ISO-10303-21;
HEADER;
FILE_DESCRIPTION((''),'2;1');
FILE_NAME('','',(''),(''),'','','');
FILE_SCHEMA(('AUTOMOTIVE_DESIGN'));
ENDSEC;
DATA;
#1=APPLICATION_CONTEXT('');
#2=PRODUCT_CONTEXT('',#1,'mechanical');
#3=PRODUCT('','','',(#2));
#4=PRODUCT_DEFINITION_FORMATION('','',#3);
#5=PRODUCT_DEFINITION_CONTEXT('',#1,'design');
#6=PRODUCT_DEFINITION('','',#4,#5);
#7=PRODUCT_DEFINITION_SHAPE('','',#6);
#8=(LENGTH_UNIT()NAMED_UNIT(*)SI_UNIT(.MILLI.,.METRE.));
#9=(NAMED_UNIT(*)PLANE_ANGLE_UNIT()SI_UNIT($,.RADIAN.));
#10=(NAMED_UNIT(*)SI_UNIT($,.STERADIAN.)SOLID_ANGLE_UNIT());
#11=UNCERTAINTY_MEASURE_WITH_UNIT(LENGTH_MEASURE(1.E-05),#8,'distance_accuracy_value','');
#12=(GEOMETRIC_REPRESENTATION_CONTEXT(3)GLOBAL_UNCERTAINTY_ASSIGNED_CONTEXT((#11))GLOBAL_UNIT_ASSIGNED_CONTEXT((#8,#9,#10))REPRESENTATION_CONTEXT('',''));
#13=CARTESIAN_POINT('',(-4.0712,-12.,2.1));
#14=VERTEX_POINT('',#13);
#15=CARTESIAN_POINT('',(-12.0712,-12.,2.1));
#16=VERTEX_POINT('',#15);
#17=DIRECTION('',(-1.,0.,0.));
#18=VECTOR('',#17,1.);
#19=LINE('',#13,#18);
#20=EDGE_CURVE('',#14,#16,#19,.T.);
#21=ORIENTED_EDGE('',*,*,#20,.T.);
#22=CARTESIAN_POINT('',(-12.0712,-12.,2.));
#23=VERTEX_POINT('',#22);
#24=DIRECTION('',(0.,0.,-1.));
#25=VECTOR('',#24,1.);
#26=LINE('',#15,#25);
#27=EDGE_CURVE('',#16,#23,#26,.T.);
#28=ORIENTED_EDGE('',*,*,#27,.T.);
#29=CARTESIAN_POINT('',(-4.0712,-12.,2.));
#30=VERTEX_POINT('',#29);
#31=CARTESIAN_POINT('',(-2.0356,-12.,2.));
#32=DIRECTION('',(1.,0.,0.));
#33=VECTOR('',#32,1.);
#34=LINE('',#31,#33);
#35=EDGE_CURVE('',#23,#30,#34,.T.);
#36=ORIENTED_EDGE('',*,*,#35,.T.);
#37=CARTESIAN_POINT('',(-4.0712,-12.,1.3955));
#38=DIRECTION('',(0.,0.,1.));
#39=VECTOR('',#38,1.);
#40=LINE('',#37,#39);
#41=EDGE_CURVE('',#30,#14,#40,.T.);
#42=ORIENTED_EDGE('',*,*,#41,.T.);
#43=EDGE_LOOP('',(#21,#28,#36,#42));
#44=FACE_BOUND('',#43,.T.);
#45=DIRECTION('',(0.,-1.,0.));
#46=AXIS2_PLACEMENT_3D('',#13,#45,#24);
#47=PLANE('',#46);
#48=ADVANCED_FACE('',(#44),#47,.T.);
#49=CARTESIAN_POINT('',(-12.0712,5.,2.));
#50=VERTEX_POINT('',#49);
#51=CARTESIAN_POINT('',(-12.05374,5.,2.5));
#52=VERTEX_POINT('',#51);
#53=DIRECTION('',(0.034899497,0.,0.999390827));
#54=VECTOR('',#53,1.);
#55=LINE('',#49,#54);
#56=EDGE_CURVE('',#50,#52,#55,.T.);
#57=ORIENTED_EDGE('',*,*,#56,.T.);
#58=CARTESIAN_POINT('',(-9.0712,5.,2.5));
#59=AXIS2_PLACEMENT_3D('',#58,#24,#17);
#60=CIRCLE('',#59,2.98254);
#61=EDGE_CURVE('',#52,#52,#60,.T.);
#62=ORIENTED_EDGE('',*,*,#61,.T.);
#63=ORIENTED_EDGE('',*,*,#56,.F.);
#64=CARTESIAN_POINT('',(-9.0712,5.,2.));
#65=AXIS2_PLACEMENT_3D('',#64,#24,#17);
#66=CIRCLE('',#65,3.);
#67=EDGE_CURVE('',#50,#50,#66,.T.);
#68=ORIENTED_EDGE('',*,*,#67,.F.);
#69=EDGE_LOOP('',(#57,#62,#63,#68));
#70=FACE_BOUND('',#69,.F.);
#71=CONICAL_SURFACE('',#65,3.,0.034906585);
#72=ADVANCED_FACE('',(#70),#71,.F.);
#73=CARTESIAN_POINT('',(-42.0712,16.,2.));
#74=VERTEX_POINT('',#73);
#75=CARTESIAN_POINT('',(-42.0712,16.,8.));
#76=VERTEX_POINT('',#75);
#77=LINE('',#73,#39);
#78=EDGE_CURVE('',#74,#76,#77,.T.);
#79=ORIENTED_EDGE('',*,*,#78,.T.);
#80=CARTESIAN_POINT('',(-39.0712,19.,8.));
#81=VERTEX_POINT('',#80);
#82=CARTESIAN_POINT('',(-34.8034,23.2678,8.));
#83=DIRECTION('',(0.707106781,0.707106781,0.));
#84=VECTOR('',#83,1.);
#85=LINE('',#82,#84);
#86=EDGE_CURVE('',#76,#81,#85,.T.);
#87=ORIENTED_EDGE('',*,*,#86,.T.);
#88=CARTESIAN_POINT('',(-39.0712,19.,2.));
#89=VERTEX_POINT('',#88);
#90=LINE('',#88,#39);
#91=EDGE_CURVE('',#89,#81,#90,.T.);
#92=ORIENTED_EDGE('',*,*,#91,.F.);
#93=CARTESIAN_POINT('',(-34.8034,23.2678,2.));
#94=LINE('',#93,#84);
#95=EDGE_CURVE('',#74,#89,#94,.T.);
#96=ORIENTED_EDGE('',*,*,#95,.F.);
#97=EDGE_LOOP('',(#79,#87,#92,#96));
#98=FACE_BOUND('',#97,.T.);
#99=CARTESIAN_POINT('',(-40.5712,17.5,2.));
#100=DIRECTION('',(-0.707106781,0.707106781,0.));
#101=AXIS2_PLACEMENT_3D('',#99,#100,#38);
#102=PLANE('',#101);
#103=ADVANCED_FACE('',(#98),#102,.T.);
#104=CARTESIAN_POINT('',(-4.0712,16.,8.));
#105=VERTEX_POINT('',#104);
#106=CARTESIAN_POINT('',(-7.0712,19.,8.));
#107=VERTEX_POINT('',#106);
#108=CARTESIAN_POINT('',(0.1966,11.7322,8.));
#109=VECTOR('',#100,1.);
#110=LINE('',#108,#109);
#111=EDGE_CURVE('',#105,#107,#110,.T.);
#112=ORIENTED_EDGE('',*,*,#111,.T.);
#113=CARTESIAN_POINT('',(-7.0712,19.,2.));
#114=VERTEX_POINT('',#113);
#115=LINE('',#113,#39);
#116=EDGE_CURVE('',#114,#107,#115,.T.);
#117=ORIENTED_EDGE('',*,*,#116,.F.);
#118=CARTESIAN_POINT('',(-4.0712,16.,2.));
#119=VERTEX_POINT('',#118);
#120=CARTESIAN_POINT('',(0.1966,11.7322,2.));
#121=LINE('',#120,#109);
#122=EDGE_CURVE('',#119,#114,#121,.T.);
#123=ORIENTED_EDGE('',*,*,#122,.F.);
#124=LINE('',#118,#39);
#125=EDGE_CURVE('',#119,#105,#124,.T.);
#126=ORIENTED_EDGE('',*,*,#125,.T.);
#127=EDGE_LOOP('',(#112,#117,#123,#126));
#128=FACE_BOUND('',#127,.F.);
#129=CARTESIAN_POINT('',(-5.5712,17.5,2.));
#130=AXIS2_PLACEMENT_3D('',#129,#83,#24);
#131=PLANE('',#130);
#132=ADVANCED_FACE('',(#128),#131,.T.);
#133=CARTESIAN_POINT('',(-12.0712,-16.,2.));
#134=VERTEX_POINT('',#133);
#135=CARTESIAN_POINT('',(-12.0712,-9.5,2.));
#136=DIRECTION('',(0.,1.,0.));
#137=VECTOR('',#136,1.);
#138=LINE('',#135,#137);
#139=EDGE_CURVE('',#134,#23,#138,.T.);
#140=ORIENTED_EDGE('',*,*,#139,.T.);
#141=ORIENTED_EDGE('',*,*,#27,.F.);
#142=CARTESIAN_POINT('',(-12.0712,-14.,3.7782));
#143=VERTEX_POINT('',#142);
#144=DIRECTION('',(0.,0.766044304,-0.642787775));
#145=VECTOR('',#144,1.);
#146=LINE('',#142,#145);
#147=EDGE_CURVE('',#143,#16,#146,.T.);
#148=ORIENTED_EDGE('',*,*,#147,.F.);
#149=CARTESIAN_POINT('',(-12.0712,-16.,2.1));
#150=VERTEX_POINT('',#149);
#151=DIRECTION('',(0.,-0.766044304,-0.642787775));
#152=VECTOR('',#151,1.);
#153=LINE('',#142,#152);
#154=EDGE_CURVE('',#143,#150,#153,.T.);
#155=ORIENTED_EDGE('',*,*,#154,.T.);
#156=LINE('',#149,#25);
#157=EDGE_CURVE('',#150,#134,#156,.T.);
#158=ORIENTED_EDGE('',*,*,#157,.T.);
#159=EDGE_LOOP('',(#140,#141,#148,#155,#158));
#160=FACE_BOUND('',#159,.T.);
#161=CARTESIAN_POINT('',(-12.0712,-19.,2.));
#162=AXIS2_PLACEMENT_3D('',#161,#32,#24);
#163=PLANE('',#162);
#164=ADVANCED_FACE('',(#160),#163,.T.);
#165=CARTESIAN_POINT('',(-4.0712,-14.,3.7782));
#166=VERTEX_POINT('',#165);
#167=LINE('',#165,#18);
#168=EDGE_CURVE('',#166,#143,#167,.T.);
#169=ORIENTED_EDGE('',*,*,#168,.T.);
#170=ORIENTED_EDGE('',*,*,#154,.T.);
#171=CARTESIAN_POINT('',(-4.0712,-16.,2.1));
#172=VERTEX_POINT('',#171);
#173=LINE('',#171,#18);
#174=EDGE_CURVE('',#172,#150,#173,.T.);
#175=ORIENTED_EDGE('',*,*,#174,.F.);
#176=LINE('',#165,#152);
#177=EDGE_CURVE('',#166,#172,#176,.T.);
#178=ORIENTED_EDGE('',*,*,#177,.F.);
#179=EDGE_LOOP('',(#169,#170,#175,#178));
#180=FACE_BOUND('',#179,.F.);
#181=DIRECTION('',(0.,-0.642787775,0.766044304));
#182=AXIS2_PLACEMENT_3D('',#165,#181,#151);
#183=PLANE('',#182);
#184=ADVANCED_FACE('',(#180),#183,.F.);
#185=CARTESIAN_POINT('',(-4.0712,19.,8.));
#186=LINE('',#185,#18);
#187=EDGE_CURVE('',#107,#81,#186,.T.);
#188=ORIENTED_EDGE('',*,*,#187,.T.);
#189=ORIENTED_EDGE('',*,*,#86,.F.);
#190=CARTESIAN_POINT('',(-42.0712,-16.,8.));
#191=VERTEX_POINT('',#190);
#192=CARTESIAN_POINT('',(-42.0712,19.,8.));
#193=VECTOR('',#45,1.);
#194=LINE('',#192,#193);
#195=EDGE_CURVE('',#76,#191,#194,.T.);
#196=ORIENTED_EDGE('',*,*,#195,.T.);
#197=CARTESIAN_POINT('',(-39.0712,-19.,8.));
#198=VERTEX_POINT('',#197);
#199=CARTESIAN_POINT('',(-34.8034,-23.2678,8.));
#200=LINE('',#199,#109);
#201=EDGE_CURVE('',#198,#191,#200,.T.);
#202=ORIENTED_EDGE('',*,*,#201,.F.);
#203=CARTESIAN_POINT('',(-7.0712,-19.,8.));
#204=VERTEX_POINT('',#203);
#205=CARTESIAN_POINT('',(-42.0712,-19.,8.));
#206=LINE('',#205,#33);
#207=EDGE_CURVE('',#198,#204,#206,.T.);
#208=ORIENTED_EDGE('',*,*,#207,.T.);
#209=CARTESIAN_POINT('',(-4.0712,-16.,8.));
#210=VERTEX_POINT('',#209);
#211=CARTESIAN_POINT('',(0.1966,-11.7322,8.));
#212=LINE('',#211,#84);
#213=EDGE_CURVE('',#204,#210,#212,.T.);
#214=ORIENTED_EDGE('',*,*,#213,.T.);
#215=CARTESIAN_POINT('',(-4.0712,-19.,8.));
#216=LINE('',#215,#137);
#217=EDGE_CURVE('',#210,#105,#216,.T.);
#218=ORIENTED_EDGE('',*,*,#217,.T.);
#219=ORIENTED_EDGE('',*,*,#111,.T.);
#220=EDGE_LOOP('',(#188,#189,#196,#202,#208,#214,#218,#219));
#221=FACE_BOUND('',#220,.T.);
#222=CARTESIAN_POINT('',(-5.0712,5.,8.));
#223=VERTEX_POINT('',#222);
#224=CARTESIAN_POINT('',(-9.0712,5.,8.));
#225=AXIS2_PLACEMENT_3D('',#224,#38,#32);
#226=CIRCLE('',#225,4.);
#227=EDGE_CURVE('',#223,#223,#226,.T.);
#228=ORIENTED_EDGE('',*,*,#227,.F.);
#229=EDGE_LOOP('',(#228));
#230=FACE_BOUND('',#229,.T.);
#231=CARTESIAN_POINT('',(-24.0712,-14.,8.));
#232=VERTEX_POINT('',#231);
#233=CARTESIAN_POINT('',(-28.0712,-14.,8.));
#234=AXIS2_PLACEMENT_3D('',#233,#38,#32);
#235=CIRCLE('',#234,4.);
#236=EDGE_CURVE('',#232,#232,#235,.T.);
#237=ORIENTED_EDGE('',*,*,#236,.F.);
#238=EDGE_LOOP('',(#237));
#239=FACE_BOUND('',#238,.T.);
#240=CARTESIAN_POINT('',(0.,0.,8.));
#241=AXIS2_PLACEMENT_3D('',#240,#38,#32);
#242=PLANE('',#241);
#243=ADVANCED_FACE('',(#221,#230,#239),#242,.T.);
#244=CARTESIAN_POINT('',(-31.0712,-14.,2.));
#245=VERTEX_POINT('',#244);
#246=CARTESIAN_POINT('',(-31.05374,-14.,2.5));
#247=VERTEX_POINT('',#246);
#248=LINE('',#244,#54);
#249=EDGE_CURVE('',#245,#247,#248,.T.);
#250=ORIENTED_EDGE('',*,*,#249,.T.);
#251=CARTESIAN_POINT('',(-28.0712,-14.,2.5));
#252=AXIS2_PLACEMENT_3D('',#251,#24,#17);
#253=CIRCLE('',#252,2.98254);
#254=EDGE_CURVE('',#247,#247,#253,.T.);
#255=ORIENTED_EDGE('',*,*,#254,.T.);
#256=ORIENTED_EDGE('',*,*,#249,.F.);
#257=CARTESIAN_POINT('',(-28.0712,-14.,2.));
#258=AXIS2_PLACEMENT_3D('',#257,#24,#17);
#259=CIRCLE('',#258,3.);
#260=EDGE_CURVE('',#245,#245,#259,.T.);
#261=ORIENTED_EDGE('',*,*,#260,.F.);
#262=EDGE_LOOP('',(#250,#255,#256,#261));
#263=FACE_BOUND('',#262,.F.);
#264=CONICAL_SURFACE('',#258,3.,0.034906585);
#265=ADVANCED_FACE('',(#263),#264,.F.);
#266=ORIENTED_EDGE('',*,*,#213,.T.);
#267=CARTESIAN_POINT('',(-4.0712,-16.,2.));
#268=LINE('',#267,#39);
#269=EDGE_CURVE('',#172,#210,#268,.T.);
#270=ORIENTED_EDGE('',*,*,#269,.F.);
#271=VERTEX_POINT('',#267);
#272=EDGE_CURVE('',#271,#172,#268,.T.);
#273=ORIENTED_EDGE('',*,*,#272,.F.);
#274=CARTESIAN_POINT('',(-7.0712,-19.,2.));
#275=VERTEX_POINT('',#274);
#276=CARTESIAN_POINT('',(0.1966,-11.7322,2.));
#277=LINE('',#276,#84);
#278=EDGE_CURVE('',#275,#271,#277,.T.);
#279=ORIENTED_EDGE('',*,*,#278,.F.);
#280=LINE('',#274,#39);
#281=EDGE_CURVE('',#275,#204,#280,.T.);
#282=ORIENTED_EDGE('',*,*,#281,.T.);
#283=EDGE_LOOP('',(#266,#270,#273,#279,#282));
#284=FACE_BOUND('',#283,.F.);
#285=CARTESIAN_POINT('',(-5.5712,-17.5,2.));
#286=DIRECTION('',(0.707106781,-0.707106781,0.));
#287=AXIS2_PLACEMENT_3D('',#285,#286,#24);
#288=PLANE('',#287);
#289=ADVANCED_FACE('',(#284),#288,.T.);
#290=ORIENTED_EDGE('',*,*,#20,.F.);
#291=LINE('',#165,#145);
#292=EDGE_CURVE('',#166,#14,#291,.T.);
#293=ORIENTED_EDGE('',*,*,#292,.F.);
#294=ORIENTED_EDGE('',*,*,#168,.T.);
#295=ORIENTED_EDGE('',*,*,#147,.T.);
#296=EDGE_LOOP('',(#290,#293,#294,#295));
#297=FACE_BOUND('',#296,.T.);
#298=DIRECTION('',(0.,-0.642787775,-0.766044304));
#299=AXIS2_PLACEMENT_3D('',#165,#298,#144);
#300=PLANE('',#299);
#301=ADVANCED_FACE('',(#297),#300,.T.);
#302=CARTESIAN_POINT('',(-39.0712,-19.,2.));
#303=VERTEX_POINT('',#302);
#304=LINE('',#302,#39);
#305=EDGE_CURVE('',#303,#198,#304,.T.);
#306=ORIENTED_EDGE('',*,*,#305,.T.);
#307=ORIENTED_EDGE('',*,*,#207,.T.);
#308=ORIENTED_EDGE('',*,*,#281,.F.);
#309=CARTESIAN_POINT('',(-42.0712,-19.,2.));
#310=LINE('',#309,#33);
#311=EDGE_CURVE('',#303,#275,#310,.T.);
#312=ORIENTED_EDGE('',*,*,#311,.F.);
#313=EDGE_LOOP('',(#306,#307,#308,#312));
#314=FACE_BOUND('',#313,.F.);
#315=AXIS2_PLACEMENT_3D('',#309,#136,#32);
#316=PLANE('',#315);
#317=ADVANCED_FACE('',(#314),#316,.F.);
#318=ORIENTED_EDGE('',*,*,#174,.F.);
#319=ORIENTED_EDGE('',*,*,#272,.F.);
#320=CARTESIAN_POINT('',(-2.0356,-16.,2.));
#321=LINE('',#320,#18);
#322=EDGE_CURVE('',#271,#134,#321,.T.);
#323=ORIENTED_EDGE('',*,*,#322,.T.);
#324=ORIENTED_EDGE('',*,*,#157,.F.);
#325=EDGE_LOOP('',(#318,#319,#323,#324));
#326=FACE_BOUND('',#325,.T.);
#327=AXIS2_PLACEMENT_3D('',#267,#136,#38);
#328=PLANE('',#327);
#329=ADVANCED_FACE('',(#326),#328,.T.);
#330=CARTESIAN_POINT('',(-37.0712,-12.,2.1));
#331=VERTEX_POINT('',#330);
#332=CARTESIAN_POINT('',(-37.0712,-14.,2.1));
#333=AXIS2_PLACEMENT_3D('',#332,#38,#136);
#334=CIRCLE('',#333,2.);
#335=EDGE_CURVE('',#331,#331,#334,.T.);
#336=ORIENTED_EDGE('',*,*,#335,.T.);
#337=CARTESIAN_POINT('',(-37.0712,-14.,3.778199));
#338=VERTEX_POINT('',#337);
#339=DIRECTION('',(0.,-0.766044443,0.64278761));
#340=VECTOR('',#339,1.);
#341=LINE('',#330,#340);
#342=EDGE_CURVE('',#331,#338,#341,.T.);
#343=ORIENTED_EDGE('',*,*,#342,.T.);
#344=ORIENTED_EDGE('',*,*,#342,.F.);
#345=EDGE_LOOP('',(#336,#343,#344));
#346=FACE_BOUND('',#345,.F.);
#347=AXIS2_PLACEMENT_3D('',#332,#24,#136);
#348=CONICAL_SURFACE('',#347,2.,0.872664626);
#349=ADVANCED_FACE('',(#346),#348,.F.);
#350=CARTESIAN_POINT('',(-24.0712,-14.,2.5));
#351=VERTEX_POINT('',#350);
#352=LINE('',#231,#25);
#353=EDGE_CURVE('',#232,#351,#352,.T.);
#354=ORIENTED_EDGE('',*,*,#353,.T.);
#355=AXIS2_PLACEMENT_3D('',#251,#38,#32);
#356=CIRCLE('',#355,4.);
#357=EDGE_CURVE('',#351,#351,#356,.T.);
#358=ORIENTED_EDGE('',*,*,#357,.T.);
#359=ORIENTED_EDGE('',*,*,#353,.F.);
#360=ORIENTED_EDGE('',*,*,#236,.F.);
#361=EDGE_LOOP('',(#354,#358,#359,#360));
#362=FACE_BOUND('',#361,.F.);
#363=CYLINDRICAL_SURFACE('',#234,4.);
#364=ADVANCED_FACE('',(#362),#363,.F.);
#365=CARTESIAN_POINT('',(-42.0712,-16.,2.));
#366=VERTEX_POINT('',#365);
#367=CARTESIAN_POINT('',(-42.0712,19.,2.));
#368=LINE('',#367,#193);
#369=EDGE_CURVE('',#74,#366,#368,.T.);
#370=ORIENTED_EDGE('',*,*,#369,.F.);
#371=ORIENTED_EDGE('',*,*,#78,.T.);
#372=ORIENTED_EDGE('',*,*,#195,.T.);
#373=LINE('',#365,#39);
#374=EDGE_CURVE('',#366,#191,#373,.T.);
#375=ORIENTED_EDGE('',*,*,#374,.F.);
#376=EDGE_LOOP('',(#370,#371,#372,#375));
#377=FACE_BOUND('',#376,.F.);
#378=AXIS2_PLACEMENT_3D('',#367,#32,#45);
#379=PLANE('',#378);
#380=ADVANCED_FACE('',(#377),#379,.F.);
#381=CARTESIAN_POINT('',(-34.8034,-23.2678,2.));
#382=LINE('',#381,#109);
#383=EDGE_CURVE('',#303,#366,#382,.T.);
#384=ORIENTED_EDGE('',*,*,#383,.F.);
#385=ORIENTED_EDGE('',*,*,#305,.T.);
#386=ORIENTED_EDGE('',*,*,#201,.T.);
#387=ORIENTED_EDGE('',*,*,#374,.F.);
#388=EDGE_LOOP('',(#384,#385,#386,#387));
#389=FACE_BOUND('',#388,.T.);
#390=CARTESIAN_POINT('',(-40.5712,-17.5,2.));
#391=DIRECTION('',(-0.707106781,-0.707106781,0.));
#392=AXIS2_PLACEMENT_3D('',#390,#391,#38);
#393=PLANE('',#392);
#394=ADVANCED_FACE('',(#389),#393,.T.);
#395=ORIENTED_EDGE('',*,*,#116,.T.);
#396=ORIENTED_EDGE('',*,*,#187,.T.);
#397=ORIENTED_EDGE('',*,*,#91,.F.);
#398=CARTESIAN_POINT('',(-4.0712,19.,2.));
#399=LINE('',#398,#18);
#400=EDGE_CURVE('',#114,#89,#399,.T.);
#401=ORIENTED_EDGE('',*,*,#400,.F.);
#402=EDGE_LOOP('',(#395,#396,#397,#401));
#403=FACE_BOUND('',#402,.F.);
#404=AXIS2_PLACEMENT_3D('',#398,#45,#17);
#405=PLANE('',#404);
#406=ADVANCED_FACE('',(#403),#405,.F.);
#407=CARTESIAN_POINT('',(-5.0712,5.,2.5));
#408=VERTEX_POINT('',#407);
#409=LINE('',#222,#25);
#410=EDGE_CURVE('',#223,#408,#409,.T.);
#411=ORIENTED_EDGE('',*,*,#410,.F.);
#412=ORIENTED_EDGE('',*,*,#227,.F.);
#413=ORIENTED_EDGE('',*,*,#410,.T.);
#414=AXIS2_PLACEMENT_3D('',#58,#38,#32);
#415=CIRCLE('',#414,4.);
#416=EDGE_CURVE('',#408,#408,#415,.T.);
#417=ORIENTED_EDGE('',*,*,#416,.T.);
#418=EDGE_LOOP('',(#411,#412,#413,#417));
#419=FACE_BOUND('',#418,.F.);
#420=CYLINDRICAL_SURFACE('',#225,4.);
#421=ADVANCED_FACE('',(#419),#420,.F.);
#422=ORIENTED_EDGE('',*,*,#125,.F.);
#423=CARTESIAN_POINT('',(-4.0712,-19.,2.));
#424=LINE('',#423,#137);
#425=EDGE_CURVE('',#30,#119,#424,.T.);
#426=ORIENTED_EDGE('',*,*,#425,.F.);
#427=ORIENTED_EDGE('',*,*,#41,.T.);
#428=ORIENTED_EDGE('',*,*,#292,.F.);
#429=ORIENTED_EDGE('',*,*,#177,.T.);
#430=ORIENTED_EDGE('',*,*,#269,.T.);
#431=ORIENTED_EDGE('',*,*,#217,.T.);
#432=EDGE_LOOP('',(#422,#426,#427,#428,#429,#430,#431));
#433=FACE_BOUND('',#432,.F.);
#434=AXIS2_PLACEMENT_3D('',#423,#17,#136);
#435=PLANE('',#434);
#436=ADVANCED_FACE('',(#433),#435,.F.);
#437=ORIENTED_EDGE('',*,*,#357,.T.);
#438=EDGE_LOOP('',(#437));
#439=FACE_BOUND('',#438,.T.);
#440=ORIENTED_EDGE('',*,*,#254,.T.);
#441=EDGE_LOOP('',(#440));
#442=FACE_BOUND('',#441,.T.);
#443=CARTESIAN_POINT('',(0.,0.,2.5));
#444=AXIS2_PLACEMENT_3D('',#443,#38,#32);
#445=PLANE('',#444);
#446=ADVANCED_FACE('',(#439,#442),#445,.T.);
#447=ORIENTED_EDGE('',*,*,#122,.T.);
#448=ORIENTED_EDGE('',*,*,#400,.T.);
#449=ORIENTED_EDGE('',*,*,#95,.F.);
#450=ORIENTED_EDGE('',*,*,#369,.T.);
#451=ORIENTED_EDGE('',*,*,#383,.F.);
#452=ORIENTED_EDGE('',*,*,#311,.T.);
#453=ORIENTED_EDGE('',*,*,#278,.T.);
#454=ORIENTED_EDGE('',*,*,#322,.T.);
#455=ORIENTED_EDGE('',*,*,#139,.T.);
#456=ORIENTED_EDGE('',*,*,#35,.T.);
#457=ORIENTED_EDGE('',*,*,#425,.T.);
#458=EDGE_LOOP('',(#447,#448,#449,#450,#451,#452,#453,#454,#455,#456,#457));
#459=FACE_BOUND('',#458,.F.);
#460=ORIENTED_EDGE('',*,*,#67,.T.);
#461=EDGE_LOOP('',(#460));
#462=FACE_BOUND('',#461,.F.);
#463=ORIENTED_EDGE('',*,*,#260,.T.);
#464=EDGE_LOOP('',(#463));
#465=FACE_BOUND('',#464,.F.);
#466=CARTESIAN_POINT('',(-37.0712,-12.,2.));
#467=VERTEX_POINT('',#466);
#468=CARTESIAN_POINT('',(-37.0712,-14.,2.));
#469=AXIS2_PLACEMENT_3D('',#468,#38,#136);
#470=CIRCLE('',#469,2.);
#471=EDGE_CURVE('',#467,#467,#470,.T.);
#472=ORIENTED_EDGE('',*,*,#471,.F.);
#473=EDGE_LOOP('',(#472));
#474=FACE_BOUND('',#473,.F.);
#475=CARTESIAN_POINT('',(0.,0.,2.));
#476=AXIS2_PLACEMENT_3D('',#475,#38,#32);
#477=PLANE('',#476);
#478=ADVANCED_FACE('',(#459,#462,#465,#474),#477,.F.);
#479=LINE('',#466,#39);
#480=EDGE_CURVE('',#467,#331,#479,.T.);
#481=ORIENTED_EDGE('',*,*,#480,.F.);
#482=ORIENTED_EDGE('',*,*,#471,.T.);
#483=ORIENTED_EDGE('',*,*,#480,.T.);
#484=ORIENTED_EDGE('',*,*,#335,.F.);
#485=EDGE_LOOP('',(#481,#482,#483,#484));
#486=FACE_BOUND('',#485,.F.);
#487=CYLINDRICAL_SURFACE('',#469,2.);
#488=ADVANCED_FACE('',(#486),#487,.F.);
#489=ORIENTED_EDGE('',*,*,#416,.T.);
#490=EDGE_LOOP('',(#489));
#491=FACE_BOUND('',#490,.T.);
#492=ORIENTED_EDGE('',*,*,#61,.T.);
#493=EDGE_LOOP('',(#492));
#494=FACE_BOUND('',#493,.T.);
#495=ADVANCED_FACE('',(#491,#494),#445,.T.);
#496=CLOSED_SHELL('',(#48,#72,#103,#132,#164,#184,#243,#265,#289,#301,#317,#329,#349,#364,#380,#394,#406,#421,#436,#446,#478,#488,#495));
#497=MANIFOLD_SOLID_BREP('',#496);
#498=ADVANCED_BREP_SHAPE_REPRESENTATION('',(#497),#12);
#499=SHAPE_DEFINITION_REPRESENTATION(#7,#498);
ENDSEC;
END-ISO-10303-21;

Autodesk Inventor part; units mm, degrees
ref_plane "YZ Plane" through (0, 0, 0) normal (1, 0, 0) x (0, 1, 0)
ref_plane "XZ Plane" through (0, 0, 0) normal (0, 1, 0) x (-1, 0, 0)
ref_plane "XY Plane" through (0, 0, 0) normal (0, 0, 1) x (1, 0, 0)
ref_plane "Work Plane1" through (0, 0, 2) normal (0, 0, 1) x (1, 0, 0)
sketch "Sketch1" plane through (0, 0, 2) normal (0, 0, 1) x (1, 0, 0)
  line L0 (-37.0712, 14) -> (-9.0712, 14) construction
  line L1 (-9.0712, 14) -> (-9.0712, -14) construction
  line L2 (-9.0712, -14) -> (-37.0712, -14) construction
  line L3 (-37.0712, -14) -> (-37.0712, 14) construction
  line L4 (-4.0712, -19) -> (-4.0712, 19)
  line L5 (-4.0712, 19) -> (-42.0712, 19)
  line L6 (-42.0712, 19) -> (-42.0712, -19)
  line L7 (-42.0712, -19) -> (-4.0712, -19)
  circle A0 centre (-23.0712, 0) radius 12.8
  point P0 (0, 0)
  dimension "d0" = 5
extrude "Extrusion1" add sketch "Sketch1" along normal blind 6 contours L7 L6 L5 L4 | A0
sketch "Sketch3" plane through (0, 0, 2) normal (0, 0, -1) x (-1, 0, 0)
  circle A0 centre (9.0712, -14) radius 1.45 construction
  circle A1 centre (9.0712, -14) radius 2.45
  circle A2 centre (37.0712, -14) radius 1.45 projected
  circle A3 centre (37.0712, -14) radius 1.95
  point P0 (0, 0)
  dimension "d8" = 1
  dimension "d10" = 0.5
chamfer "Chamfer1" distance 3 angle 45 4 edges at (-42.0712, 19, 5) (-4.0712, 19, 5) (-4.0712, -19, 5) (-42.0712, -19, 5)
hole "Hole1" at (-37.0712, -14, 2) direction (0, 0, 1) diameter 4 depth 0.1 tip angle 100
sketch "Sketch4" plane through (-4.0712, -19, 2) normal (1, 0, 0) x (0, 0, -1)
  line L0 (2, 4.45) -> (6, 4.45)
  line L1 (2, 1.55) -> (6, 1.55)
  line L2 (0, 0) -> (0, 38) projected
  arc A0 (2, 19) -> (2, 19) centre (1.5, 4.4206) ccw projected
  line L3 (-1.7782, 5) -> (-0.1, 7) projected
  line L4 (-1.7782, 5) -> (-0.1, 3) projected
  line L5 (-0.1, 7) -> (0.6045, 7)
  line L6 (0.6045, 7) -> (0.6045, 3)
  line L7 (0.6045, 3) -> (-0.1, 3)
  line L8 (-0.1, 3) -> (-0.1, 7)
extrude "Extrusion4" cut sketch "Sketch4" against normal blind 8 contours L7 L8 L5 L2 | L2 L5 L6 L7 | L4 L3 L8
ref_plane "Arbeitsebene2" through (-23.0712, -12, 2) normal (1, 0, 0) x (0, 0, -1)
ref_plane "Arbeitsebene3" through (-39.0712, 0, 2) normal (0, -1, 0) x (1, 0, 0)
sketch "Skizze9" plane through (0, 0, 2) normal (0, 0, -1) x (-1, 0, 0)
  line L0 (12.0712, -16) -> (4.0712, -16) projected
  line L1 (7.0712, -19) -> (4.0712, -16) projected
  line L2 (39.0712, -19) -> (7.0712, -19) projected
  line L3 (42.0712, -16) -> (39.0712, -19) projected
  line L4 (42.0712, 16) -> (42.0712, -16) projected
  line L5 (39.0712, 19) -> (42.0712, 16) projected
  line L6 (7.0712, 19) -> (39.0712, 19) projected
  line L7 (4.0712, 16) -> (7.0712, 19) projected
  line L8 (4.0712, -12) -> (4.0712, 16) projected
  line L9 (4.0712, -12) -> (12.0712, -12) projected
  line L10 (12.0712, -12) -> (12.0712, -16) projected
  circle A0 centre (37.0712, -14) radius 2 projected
  circle A1 centre (28.0712, -14) radius 3
  circle A2 centre (9.0712, 5) radius 3
  point P0 (0, 0)
  dimension "d54" = 6
  dimension "d55" = 6
  dimension "d56" = 14
  dimension "d57" = 5
  dimension "d58" = 5
  dimension "d59" = 14
extrude "Extrusion9" cut sketch "Skizze9" against normal blind 3 draft -2 contours A1 | A2
sketch "Skizze10" plane through (0, 0, 8) normal (0, 0, 1) x (1, 0, 0)
  circle A0 centre (-9.0712, 5) radius 4.05 projected
  circle A1 centre (-28.0712, -14) radius 4.55 projected
  circle A2 centre (-9.0712, 5) radius 4
  circle A3 centre (-28.0712, -14) radius 2.8952 projected
  circle A4 centre (-28.0712, -14) radius 4
  point P0 (0, 0)
  dimension "d62" = 8
  dimension "d63" = 8
extrude "Extrusion10" cut sketch "Skizze10" against normal blind 5.5 contours A2 | A3 | A4
equation "\"d54\" = d55"
equation "\"d59\" = d56"
properties part number "20_Cube_Insert_Kinematic_Astromedia_30x40x1_45_pro_magnetic"
